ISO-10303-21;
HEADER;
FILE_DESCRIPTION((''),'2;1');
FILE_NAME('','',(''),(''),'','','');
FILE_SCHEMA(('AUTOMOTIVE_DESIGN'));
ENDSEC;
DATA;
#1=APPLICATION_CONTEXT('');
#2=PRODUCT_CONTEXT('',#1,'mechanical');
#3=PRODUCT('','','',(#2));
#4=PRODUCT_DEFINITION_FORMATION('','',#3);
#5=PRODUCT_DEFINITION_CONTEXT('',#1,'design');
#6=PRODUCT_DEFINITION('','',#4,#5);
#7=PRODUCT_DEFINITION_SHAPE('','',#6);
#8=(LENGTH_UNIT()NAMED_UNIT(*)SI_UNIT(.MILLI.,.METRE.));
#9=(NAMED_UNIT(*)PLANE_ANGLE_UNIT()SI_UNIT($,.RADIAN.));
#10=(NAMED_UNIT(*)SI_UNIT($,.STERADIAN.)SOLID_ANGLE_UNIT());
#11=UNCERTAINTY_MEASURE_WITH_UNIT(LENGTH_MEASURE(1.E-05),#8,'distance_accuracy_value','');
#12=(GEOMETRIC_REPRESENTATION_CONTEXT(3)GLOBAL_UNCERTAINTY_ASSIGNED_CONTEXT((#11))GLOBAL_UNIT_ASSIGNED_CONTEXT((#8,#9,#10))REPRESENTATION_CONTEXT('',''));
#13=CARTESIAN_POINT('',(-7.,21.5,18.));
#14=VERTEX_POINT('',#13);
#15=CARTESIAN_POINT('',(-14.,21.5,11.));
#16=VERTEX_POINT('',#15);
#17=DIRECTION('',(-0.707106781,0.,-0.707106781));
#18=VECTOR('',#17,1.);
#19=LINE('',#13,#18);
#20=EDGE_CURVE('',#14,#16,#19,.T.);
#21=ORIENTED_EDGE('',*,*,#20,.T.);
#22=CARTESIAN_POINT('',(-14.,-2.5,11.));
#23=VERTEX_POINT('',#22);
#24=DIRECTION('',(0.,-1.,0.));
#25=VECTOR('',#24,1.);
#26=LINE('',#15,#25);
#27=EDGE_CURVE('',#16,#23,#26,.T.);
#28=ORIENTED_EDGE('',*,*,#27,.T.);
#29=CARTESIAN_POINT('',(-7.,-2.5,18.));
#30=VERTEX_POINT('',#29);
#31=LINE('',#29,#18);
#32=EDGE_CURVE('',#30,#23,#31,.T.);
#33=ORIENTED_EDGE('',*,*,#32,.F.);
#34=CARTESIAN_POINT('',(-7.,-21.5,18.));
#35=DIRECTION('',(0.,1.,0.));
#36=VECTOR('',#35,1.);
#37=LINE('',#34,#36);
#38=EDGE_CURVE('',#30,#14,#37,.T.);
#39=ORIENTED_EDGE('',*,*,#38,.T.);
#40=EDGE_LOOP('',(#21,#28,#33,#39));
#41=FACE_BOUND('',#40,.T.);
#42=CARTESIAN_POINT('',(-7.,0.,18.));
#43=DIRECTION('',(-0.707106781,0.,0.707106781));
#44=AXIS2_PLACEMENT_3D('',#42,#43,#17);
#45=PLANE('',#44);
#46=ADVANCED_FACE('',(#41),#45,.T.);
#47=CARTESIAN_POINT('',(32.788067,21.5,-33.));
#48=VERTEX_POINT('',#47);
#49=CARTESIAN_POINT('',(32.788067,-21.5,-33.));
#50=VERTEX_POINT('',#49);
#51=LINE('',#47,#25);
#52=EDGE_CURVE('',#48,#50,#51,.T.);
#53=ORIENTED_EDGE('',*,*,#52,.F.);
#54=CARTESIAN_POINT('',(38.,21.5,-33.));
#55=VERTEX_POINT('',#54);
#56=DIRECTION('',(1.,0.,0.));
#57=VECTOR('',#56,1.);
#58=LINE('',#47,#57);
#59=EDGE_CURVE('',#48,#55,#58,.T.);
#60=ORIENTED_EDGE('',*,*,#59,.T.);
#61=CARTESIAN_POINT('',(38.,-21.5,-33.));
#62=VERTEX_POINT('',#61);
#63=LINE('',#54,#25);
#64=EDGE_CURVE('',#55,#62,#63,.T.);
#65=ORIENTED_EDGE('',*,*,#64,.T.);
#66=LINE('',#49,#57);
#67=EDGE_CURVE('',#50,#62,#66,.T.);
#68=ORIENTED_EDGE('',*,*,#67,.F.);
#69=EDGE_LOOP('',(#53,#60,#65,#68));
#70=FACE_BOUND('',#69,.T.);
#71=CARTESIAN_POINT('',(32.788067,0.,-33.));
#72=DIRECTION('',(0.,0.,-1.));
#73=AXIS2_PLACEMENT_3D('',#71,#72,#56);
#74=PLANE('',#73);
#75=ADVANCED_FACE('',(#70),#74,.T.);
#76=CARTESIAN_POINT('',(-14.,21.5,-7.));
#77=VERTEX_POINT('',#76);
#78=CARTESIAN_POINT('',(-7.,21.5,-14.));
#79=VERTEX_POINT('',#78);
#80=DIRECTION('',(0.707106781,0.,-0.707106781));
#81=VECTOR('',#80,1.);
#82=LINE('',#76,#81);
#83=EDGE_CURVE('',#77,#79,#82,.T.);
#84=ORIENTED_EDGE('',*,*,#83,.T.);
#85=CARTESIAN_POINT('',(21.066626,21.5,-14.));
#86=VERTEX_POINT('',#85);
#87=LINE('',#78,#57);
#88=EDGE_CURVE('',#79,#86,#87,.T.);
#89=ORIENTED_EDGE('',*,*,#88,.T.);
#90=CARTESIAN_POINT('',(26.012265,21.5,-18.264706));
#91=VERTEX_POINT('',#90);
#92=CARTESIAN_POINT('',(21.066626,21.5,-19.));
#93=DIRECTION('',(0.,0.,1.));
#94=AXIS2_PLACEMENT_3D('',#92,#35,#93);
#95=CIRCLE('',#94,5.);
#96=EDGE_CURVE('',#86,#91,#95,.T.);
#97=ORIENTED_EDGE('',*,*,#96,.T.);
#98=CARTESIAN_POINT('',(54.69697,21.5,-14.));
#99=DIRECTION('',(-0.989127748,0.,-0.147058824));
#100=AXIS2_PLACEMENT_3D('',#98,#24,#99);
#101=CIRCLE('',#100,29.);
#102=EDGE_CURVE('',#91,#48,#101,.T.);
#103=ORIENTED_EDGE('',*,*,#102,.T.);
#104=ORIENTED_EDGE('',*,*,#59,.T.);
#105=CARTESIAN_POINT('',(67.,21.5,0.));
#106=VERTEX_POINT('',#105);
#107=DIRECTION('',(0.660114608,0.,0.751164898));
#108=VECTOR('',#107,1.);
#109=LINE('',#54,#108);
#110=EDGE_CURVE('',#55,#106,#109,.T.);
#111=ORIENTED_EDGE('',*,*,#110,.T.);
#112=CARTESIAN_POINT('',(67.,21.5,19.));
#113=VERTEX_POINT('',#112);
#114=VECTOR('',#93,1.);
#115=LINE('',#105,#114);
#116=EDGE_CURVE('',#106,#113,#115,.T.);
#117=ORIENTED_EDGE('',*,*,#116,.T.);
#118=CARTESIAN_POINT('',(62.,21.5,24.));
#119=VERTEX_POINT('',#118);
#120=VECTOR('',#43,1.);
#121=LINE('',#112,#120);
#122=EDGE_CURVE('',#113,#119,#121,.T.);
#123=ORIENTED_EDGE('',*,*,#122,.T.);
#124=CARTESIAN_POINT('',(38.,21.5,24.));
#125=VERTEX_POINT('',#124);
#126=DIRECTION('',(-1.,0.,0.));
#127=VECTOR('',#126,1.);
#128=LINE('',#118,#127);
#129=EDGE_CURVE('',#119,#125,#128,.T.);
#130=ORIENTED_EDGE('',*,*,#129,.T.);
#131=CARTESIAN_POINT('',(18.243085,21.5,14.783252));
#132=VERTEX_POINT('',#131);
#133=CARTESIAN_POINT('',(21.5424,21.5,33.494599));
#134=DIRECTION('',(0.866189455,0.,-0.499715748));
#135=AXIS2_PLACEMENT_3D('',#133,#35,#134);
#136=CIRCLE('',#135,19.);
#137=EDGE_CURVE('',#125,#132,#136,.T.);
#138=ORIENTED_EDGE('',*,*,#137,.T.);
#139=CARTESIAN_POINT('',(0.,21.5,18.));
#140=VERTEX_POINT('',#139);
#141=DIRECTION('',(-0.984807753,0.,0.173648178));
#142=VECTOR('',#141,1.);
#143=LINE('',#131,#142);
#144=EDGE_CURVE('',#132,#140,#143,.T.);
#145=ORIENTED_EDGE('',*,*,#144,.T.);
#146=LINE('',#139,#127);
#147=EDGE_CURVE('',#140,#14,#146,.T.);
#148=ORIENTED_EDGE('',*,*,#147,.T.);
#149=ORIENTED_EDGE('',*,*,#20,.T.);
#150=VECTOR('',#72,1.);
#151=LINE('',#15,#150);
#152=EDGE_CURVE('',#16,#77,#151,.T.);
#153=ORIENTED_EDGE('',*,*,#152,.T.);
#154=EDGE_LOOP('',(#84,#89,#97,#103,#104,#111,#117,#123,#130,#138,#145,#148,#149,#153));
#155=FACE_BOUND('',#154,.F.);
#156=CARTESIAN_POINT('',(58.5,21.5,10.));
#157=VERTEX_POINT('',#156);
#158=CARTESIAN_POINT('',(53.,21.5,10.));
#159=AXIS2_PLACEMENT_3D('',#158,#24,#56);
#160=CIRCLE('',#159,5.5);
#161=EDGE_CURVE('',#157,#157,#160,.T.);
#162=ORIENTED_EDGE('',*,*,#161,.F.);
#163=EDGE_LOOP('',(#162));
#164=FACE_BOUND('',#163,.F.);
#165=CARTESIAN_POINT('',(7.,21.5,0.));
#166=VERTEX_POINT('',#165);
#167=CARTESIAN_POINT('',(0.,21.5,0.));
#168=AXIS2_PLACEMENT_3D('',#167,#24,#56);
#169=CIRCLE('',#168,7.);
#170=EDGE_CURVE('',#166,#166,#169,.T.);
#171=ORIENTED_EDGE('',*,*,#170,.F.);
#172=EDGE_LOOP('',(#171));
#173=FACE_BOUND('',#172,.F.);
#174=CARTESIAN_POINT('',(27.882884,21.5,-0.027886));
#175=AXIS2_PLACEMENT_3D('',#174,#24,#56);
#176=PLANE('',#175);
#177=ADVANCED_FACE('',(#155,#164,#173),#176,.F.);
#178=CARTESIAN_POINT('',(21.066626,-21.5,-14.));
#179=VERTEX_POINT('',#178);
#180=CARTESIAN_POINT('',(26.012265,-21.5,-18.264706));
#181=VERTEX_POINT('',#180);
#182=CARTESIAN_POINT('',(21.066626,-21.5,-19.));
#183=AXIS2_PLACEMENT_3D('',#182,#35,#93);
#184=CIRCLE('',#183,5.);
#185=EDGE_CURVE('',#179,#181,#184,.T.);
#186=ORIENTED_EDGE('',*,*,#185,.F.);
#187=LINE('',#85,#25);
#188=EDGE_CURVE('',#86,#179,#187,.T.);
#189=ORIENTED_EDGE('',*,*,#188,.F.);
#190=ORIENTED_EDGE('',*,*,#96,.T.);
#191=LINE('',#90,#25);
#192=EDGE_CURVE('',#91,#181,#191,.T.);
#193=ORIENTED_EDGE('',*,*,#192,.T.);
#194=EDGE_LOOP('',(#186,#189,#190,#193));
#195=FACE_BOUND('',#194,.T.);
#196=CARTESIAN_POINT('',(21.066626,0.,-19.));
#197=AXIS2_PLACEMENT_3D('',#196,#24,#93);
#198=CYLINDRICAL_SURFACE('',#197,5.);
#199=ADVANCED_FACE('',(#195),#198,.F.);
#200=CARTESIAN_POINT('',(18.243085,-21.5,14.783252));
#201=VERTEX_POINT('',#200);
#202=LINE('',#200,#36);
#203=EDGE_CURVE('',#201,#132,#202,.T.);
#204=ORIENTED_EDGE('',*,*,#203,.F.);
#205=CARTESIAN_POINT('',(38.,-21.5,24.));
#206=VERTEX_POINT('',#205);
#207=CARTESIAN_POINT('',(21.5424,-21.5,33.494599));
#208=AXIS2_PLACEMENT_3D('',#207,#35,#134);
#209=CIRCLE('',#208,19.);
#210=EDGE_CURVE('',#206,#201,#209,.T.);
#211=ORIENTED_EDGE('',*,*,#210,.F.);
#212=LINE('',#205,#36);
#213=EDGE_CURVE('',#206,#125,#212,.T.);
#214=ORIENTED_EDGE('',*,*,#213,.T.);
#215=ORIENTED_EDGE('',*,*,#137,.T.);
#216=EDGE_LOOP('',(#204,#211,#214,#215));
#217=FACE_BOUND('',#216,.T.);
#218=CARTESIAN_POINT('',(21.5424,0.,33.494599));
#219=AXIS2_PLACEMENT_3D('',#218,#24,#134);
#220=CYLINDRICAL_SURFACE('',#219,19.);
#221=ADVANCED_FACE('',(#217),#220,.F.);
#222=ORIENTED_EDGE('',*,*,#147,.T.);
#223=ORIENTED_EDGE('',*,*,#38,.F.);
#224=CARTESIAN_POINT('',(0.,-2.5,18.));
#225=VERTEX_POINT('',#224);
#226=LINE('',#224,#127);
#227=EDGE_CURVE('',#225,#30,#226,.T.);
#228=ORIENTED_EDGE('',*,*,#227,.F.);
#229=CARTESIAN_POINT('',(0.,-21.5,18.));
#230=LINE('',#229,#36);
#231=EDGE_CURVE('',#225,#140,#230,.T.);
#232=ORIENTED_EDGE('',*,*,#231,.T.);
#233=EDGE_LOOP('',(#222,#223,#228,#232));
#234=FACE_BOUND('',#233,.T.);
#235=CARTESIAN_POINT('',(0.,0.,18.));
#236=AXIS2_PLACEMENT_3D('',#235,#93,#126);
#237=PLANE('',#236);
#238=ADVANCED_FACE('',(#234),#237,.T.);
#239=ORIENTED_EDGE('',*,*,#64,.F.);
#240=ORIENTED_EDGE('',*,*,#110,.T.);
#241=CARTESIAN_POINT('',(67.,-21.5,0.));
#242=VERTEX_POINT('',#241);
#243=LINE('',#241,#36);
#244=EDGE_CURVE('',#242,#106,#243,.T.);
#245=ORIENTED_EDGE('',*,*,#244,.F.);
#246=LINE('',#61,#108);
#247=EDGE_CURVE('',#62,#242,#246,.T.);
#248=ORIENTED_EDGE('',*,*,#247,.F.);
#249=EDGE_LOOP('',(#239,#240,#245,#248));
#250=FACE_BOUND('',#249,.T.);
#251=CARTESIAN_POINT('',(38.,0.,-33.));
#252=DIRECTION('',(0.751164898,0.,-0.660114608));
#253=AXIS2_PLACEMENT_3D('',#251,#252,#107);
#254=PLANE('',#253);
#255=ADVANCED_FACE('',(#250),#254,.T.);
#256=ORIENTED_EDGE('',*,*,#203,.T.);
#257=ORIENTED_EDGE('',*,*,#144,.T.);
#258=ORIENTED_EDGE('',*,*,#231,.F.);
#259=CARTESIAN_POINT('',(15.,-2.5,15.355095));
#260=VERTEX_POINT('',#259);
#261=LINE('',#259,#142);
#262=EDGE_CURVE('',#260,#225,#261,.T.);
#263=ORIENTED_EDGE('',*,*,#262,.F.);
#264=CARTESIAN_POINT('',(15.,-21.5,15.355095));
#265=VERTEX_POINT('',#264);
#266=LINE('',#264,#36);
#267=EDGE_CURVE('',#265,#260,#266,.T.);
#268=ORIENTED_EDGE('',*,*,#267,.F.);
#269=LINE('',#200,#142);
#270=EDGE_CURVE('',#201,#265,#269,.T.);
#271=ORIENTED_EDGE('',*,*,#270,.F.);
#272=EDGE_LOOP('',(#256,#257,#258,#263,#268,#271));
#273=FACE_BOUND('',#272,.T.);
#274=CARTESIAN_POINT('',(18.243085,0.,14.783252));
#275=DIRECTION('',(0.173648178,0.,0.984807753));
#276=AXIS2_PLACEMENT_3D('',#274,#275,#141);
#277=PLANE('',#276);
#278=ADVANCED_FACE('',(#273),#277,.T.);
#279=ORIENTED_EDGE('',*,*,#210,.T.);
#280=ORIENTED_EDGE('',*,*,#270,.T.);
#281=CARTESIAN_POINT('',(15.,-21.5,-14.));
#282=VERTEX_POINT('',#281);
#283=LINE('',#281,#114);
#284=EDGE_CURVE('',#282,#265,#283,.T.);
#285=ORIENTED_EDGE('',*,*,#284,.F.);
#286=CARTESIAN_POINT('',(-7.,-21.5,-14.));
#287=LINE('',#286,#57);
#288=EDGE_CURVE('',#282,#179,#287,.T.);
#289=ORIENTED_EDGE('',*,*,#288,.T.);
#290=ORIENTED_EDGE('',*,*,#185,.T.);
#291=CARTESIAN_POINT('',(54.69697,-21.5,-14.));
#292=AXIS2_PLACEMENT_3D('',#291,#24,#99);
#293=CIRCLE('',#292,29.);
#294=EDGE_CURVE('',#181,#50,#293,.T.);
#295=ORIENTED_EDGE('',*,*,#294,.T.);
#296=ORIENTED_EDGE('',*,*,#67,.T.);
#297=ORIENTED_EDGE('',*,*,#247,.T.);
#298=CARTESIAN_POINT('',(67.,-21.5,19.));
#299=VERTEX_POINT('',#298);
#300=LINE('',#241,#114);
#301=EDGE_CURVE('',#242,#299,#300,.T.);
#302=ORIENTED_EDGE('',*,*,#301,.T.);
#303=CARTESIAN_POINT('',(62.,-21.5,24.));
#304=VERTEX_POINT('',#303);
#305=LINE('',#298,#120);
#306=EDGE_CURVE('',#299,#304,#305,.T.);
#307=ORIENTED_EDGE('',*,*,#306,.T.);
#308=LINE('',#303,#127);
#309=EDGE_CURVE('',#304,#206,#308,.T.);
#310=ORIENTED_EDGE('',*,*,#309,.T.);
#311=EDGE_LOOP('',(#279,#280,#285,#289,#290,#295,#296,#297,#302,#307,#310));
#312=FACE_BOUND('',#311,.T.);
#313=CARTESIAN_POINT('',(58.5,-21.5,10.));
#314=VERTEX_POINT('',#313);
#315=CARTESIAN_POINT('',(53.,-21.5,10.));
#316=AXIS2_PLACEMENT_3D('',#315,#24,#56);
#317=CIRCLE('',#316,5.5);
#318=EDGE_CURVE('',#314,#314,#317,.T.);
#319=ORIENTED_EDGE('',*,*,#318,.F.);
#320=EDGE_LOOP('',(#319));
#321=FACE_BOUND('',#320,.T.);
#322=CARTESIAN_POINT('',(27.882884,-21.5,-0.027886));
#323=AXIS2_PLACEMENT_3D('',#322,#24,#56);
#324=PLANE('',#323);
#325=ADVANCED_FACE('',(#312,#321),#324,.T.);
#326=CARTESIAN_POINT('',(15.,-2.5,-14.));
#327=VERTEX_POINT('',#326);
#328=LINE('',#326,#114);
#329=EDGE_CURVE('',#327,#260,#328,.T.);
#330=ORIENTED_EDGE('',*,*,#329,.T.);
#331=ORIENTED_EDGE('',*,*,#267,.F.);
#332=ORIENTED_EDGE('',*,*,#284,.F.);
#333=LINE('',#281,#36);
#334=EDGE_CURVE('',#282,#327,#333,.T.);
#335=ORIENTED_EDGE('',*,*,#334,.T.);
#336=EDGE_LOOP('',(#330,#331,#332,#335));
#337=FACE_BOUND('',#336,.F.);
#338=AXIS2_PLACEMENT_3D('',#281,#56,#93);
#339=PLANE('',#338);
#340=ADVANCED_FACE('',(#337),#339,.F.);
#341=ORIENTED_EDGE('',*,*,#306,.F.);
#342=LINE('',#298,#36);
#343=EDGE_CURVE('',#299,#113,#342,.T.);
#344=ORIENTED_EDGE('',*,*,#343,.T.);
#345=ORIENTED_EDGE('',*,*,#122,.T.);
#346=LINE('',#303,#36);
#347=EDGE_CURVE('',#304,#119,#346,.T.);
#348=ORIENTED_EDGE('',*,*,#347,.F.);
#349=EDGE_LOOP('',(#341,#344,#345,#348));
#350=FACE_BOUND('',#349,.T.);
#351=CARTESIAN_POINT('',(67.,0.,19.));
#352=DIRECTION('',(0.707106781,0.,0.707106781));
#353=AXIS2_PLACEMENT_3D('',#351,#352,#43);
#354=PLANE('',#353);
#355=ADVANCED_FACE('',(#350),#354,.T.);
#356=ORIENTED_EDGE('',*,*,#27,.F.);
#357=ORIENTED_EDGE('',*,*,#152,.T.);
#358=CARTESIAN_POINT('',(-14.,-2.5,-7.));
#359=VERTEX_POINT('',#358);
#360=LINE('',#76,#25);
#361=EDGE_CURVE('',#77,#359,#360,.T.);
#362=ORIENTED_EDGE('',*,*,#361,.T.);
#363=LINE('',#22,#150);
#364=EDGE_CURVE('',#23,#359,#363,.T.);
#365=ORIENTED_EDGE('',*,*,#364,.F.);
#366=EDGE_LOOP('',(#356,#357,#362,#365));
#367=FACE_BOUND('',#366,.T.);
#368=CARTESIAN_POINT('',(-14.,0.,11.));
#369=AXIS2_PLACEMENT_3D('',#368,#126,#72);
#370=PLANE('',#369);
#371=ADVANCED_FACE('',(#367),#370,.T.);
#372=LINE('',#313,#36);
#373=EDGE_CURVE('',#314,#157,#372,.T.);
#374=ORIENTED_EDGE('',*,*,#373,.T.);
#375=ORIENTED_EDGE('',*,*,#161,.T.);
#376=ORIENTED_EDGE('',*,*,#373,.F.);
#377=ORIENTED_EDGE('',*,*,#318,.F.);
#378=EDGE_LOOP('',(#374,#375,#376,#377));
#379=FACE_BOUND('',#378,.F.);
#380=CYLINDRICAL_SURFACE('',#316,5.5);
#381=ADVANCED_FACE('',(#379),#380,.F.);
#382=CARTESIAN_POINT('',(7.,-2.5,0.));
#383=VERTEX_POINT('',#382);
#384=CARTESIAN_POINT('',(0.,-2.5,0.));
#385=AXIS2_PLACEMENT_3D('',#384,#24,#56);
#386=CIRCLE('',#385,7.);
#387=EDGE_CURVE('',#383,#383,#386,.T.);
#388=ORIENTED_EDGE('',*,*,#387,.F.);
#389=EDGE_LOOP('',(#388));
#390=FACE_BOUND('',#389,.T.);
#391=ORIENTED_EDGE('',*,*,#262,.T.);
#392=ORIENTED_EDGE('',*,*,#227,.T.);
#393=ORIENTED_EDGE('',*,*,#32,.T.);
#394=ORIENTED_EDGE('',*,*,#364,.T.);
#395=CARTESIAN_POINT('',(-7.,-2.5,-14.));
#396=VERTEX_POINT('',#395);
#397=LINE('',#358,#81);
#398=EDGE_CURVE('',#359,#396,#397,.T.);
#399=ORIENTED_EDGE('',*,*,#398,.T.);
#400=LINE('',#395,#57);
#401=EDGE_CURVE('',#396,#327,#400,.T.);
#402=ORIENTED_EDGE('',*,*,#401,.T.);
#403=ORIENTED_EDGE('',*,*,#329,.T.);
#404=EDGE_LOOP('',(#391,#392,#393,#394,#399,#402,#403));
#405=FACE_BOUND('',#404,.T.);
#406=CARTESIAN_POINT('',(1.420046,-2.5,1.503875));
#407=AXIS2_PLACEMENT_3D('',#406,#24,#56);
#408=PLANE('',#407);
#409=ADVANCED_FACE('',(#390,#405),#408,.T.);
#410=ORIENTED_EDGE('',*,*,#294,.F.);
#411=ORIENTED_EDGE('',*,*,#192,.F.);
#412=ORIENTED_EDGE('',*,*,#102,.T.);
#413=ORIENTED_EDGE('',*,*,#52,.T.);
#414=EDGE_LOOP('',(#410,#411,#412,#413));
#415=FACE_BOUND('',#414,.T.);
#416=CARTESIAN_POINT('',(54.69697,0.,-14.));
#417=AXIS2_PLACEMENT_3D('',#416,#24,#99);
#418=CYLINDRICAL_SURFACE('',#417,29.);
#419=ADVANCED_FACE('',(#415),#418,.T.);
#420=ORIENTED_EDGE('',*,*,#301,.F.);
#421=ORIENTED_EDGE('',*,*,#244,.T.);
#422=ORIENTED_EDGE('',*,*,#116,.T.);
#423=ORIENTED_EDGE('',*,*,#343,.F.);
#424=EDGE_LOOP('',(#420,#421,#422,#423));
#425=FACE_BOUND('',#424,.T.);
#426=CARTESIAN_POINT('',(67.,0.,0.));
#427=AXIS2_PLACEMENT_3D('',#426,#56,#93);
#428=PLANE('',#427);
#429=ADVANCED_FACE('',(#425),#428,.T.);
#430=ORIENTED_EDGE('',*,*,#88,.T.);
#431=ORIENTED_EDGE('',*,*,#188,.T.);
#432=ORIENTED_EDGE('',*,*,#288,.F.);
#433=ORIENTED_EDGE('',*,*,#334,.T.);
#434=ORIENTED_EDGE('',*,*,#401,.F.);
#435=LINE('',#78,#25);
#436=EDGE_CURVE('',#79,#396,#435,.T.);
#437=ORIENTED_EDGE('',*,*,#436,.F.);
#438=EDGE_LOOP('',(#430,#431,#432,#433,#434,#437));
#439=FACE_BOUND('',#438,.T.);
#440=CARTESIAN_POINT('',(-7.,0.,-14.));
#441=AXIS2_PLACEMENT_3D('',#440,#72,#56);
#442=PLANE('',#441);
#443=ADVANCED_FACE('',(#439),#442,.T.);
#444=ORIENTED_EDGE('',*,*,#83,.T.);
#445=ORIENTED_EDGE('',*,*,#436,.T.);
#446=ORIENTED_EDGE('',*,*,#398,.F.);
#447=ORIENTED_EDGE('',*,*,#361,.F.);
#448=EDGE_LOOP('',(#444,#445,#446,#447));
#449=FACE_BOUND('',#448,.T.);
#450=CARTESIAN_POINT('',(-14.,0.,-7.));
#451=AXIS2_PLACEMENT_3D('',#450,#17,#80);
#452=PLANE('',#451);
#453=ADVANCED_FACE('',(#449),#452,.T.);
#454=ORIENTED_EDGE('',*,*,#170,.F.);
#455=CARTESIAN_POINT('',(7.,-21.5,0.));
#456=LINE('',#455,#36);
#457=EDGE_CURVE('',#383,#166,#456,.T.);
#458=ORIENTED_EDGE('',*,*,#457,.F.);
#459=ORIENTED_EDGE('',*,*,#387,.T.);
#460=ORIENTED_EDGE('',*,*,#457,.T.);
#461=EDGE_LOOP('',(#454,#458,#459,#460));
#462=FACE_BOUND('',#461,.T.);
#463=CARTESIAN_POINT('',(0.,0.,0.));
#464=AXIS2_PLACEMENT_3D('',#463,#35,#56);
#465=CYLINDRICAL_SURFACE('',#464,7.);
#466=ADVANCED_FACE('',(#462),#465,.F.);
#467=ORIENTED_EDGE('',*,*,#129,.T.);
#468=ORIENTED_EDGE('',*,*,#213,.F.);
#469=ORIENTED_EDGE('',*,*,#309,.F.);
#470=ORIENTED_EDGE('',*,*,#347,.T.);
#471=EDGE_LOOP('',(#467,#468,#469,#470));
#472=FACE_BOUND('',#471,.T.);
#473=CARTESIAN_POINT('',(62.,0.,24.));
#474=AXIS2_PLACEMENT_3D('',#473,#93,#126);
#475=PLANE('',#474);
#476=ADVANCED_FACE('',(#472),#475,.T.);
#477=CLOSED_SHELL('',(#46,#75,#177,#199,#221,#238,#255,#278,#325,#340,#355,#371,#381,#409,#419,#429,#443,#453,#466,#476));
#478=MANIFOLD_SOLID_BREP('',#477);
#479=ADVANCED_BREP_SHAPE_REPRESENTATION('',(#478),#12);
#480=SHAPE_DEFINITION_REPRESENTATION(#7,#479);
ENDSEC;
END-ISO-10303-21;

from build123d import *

# Parameters (mm, degrees)
F0_R     = 7
F1_DEPTH = 21.5
F2_R     = 5.5
F3_DEPTH = 43.001
F2_R_2   = 7
F4_DEPTH = 19


with BuildPart() as f1:
    # F0 (on Front) → F1 (new body, symmetric)
    with BuildSketch(Plane.XZ):
        with BuildLine():
            Line((-7, 18), (-14, 11))
            Line((-14, 11), (-14, -7))
            Line((-14, -7), (-7, -14))
            Line((-7, -14), (21.0666262554, -14))
            ThreePointArc((21.0666262554, -14), (24.3318620364, -15.2134137678), (26.0122649968, -18.2647058824))
            ThreePointArc((26.0122649968, -18.2647058824), (28.3490951999, -26.115672061), (32.7880673968, -33))
            Line((32.7880673968, -33), (38, -33))
            Line((38, -33), (67, 0))
            Line((67, 0), (67, 19))
            Line((67, 19), (62, 24))
            Line((62, 24), (38, 24))
            ThreePointArc((38, 24), (29.5749729609, 16.2760691513), (18.2430849879, 14.7832519053))
            Line((18.2430849879, 14.7832519053), (0, 18))
            Line((0, 18), (-7, 18))
        make_face()
        Circle(F0_R, mode=Mode.SUBTRACT)
    extrude(amount=F1_DEPTH, both=True)

    # F2 (on face) → F3 (cut, through all)
    with BuildSketch(Plane.XZ.offset(21.5)):
        with Locations((53, 10)):
            Circle(F2_R)
    extrude(amount=-F3_DEPTH, mode=Mode.SUBTRACT)

    # F2 (on face) → F4 (cut)
    with BuildSketch(Plane.XZ.offset(21.5)):
        Polygon((15, -14), (15, 15.3550952894), (0, 18), (-7, 18), (-14, 11), (-14, -7), (-7, -14), align=None)
        Circle(F2_R_2, mode=Mode.SUBTRACT)
    extrude(amount=-F4_DEPTH, mode=Mode.SUBTRACT)


solid = f1.part
